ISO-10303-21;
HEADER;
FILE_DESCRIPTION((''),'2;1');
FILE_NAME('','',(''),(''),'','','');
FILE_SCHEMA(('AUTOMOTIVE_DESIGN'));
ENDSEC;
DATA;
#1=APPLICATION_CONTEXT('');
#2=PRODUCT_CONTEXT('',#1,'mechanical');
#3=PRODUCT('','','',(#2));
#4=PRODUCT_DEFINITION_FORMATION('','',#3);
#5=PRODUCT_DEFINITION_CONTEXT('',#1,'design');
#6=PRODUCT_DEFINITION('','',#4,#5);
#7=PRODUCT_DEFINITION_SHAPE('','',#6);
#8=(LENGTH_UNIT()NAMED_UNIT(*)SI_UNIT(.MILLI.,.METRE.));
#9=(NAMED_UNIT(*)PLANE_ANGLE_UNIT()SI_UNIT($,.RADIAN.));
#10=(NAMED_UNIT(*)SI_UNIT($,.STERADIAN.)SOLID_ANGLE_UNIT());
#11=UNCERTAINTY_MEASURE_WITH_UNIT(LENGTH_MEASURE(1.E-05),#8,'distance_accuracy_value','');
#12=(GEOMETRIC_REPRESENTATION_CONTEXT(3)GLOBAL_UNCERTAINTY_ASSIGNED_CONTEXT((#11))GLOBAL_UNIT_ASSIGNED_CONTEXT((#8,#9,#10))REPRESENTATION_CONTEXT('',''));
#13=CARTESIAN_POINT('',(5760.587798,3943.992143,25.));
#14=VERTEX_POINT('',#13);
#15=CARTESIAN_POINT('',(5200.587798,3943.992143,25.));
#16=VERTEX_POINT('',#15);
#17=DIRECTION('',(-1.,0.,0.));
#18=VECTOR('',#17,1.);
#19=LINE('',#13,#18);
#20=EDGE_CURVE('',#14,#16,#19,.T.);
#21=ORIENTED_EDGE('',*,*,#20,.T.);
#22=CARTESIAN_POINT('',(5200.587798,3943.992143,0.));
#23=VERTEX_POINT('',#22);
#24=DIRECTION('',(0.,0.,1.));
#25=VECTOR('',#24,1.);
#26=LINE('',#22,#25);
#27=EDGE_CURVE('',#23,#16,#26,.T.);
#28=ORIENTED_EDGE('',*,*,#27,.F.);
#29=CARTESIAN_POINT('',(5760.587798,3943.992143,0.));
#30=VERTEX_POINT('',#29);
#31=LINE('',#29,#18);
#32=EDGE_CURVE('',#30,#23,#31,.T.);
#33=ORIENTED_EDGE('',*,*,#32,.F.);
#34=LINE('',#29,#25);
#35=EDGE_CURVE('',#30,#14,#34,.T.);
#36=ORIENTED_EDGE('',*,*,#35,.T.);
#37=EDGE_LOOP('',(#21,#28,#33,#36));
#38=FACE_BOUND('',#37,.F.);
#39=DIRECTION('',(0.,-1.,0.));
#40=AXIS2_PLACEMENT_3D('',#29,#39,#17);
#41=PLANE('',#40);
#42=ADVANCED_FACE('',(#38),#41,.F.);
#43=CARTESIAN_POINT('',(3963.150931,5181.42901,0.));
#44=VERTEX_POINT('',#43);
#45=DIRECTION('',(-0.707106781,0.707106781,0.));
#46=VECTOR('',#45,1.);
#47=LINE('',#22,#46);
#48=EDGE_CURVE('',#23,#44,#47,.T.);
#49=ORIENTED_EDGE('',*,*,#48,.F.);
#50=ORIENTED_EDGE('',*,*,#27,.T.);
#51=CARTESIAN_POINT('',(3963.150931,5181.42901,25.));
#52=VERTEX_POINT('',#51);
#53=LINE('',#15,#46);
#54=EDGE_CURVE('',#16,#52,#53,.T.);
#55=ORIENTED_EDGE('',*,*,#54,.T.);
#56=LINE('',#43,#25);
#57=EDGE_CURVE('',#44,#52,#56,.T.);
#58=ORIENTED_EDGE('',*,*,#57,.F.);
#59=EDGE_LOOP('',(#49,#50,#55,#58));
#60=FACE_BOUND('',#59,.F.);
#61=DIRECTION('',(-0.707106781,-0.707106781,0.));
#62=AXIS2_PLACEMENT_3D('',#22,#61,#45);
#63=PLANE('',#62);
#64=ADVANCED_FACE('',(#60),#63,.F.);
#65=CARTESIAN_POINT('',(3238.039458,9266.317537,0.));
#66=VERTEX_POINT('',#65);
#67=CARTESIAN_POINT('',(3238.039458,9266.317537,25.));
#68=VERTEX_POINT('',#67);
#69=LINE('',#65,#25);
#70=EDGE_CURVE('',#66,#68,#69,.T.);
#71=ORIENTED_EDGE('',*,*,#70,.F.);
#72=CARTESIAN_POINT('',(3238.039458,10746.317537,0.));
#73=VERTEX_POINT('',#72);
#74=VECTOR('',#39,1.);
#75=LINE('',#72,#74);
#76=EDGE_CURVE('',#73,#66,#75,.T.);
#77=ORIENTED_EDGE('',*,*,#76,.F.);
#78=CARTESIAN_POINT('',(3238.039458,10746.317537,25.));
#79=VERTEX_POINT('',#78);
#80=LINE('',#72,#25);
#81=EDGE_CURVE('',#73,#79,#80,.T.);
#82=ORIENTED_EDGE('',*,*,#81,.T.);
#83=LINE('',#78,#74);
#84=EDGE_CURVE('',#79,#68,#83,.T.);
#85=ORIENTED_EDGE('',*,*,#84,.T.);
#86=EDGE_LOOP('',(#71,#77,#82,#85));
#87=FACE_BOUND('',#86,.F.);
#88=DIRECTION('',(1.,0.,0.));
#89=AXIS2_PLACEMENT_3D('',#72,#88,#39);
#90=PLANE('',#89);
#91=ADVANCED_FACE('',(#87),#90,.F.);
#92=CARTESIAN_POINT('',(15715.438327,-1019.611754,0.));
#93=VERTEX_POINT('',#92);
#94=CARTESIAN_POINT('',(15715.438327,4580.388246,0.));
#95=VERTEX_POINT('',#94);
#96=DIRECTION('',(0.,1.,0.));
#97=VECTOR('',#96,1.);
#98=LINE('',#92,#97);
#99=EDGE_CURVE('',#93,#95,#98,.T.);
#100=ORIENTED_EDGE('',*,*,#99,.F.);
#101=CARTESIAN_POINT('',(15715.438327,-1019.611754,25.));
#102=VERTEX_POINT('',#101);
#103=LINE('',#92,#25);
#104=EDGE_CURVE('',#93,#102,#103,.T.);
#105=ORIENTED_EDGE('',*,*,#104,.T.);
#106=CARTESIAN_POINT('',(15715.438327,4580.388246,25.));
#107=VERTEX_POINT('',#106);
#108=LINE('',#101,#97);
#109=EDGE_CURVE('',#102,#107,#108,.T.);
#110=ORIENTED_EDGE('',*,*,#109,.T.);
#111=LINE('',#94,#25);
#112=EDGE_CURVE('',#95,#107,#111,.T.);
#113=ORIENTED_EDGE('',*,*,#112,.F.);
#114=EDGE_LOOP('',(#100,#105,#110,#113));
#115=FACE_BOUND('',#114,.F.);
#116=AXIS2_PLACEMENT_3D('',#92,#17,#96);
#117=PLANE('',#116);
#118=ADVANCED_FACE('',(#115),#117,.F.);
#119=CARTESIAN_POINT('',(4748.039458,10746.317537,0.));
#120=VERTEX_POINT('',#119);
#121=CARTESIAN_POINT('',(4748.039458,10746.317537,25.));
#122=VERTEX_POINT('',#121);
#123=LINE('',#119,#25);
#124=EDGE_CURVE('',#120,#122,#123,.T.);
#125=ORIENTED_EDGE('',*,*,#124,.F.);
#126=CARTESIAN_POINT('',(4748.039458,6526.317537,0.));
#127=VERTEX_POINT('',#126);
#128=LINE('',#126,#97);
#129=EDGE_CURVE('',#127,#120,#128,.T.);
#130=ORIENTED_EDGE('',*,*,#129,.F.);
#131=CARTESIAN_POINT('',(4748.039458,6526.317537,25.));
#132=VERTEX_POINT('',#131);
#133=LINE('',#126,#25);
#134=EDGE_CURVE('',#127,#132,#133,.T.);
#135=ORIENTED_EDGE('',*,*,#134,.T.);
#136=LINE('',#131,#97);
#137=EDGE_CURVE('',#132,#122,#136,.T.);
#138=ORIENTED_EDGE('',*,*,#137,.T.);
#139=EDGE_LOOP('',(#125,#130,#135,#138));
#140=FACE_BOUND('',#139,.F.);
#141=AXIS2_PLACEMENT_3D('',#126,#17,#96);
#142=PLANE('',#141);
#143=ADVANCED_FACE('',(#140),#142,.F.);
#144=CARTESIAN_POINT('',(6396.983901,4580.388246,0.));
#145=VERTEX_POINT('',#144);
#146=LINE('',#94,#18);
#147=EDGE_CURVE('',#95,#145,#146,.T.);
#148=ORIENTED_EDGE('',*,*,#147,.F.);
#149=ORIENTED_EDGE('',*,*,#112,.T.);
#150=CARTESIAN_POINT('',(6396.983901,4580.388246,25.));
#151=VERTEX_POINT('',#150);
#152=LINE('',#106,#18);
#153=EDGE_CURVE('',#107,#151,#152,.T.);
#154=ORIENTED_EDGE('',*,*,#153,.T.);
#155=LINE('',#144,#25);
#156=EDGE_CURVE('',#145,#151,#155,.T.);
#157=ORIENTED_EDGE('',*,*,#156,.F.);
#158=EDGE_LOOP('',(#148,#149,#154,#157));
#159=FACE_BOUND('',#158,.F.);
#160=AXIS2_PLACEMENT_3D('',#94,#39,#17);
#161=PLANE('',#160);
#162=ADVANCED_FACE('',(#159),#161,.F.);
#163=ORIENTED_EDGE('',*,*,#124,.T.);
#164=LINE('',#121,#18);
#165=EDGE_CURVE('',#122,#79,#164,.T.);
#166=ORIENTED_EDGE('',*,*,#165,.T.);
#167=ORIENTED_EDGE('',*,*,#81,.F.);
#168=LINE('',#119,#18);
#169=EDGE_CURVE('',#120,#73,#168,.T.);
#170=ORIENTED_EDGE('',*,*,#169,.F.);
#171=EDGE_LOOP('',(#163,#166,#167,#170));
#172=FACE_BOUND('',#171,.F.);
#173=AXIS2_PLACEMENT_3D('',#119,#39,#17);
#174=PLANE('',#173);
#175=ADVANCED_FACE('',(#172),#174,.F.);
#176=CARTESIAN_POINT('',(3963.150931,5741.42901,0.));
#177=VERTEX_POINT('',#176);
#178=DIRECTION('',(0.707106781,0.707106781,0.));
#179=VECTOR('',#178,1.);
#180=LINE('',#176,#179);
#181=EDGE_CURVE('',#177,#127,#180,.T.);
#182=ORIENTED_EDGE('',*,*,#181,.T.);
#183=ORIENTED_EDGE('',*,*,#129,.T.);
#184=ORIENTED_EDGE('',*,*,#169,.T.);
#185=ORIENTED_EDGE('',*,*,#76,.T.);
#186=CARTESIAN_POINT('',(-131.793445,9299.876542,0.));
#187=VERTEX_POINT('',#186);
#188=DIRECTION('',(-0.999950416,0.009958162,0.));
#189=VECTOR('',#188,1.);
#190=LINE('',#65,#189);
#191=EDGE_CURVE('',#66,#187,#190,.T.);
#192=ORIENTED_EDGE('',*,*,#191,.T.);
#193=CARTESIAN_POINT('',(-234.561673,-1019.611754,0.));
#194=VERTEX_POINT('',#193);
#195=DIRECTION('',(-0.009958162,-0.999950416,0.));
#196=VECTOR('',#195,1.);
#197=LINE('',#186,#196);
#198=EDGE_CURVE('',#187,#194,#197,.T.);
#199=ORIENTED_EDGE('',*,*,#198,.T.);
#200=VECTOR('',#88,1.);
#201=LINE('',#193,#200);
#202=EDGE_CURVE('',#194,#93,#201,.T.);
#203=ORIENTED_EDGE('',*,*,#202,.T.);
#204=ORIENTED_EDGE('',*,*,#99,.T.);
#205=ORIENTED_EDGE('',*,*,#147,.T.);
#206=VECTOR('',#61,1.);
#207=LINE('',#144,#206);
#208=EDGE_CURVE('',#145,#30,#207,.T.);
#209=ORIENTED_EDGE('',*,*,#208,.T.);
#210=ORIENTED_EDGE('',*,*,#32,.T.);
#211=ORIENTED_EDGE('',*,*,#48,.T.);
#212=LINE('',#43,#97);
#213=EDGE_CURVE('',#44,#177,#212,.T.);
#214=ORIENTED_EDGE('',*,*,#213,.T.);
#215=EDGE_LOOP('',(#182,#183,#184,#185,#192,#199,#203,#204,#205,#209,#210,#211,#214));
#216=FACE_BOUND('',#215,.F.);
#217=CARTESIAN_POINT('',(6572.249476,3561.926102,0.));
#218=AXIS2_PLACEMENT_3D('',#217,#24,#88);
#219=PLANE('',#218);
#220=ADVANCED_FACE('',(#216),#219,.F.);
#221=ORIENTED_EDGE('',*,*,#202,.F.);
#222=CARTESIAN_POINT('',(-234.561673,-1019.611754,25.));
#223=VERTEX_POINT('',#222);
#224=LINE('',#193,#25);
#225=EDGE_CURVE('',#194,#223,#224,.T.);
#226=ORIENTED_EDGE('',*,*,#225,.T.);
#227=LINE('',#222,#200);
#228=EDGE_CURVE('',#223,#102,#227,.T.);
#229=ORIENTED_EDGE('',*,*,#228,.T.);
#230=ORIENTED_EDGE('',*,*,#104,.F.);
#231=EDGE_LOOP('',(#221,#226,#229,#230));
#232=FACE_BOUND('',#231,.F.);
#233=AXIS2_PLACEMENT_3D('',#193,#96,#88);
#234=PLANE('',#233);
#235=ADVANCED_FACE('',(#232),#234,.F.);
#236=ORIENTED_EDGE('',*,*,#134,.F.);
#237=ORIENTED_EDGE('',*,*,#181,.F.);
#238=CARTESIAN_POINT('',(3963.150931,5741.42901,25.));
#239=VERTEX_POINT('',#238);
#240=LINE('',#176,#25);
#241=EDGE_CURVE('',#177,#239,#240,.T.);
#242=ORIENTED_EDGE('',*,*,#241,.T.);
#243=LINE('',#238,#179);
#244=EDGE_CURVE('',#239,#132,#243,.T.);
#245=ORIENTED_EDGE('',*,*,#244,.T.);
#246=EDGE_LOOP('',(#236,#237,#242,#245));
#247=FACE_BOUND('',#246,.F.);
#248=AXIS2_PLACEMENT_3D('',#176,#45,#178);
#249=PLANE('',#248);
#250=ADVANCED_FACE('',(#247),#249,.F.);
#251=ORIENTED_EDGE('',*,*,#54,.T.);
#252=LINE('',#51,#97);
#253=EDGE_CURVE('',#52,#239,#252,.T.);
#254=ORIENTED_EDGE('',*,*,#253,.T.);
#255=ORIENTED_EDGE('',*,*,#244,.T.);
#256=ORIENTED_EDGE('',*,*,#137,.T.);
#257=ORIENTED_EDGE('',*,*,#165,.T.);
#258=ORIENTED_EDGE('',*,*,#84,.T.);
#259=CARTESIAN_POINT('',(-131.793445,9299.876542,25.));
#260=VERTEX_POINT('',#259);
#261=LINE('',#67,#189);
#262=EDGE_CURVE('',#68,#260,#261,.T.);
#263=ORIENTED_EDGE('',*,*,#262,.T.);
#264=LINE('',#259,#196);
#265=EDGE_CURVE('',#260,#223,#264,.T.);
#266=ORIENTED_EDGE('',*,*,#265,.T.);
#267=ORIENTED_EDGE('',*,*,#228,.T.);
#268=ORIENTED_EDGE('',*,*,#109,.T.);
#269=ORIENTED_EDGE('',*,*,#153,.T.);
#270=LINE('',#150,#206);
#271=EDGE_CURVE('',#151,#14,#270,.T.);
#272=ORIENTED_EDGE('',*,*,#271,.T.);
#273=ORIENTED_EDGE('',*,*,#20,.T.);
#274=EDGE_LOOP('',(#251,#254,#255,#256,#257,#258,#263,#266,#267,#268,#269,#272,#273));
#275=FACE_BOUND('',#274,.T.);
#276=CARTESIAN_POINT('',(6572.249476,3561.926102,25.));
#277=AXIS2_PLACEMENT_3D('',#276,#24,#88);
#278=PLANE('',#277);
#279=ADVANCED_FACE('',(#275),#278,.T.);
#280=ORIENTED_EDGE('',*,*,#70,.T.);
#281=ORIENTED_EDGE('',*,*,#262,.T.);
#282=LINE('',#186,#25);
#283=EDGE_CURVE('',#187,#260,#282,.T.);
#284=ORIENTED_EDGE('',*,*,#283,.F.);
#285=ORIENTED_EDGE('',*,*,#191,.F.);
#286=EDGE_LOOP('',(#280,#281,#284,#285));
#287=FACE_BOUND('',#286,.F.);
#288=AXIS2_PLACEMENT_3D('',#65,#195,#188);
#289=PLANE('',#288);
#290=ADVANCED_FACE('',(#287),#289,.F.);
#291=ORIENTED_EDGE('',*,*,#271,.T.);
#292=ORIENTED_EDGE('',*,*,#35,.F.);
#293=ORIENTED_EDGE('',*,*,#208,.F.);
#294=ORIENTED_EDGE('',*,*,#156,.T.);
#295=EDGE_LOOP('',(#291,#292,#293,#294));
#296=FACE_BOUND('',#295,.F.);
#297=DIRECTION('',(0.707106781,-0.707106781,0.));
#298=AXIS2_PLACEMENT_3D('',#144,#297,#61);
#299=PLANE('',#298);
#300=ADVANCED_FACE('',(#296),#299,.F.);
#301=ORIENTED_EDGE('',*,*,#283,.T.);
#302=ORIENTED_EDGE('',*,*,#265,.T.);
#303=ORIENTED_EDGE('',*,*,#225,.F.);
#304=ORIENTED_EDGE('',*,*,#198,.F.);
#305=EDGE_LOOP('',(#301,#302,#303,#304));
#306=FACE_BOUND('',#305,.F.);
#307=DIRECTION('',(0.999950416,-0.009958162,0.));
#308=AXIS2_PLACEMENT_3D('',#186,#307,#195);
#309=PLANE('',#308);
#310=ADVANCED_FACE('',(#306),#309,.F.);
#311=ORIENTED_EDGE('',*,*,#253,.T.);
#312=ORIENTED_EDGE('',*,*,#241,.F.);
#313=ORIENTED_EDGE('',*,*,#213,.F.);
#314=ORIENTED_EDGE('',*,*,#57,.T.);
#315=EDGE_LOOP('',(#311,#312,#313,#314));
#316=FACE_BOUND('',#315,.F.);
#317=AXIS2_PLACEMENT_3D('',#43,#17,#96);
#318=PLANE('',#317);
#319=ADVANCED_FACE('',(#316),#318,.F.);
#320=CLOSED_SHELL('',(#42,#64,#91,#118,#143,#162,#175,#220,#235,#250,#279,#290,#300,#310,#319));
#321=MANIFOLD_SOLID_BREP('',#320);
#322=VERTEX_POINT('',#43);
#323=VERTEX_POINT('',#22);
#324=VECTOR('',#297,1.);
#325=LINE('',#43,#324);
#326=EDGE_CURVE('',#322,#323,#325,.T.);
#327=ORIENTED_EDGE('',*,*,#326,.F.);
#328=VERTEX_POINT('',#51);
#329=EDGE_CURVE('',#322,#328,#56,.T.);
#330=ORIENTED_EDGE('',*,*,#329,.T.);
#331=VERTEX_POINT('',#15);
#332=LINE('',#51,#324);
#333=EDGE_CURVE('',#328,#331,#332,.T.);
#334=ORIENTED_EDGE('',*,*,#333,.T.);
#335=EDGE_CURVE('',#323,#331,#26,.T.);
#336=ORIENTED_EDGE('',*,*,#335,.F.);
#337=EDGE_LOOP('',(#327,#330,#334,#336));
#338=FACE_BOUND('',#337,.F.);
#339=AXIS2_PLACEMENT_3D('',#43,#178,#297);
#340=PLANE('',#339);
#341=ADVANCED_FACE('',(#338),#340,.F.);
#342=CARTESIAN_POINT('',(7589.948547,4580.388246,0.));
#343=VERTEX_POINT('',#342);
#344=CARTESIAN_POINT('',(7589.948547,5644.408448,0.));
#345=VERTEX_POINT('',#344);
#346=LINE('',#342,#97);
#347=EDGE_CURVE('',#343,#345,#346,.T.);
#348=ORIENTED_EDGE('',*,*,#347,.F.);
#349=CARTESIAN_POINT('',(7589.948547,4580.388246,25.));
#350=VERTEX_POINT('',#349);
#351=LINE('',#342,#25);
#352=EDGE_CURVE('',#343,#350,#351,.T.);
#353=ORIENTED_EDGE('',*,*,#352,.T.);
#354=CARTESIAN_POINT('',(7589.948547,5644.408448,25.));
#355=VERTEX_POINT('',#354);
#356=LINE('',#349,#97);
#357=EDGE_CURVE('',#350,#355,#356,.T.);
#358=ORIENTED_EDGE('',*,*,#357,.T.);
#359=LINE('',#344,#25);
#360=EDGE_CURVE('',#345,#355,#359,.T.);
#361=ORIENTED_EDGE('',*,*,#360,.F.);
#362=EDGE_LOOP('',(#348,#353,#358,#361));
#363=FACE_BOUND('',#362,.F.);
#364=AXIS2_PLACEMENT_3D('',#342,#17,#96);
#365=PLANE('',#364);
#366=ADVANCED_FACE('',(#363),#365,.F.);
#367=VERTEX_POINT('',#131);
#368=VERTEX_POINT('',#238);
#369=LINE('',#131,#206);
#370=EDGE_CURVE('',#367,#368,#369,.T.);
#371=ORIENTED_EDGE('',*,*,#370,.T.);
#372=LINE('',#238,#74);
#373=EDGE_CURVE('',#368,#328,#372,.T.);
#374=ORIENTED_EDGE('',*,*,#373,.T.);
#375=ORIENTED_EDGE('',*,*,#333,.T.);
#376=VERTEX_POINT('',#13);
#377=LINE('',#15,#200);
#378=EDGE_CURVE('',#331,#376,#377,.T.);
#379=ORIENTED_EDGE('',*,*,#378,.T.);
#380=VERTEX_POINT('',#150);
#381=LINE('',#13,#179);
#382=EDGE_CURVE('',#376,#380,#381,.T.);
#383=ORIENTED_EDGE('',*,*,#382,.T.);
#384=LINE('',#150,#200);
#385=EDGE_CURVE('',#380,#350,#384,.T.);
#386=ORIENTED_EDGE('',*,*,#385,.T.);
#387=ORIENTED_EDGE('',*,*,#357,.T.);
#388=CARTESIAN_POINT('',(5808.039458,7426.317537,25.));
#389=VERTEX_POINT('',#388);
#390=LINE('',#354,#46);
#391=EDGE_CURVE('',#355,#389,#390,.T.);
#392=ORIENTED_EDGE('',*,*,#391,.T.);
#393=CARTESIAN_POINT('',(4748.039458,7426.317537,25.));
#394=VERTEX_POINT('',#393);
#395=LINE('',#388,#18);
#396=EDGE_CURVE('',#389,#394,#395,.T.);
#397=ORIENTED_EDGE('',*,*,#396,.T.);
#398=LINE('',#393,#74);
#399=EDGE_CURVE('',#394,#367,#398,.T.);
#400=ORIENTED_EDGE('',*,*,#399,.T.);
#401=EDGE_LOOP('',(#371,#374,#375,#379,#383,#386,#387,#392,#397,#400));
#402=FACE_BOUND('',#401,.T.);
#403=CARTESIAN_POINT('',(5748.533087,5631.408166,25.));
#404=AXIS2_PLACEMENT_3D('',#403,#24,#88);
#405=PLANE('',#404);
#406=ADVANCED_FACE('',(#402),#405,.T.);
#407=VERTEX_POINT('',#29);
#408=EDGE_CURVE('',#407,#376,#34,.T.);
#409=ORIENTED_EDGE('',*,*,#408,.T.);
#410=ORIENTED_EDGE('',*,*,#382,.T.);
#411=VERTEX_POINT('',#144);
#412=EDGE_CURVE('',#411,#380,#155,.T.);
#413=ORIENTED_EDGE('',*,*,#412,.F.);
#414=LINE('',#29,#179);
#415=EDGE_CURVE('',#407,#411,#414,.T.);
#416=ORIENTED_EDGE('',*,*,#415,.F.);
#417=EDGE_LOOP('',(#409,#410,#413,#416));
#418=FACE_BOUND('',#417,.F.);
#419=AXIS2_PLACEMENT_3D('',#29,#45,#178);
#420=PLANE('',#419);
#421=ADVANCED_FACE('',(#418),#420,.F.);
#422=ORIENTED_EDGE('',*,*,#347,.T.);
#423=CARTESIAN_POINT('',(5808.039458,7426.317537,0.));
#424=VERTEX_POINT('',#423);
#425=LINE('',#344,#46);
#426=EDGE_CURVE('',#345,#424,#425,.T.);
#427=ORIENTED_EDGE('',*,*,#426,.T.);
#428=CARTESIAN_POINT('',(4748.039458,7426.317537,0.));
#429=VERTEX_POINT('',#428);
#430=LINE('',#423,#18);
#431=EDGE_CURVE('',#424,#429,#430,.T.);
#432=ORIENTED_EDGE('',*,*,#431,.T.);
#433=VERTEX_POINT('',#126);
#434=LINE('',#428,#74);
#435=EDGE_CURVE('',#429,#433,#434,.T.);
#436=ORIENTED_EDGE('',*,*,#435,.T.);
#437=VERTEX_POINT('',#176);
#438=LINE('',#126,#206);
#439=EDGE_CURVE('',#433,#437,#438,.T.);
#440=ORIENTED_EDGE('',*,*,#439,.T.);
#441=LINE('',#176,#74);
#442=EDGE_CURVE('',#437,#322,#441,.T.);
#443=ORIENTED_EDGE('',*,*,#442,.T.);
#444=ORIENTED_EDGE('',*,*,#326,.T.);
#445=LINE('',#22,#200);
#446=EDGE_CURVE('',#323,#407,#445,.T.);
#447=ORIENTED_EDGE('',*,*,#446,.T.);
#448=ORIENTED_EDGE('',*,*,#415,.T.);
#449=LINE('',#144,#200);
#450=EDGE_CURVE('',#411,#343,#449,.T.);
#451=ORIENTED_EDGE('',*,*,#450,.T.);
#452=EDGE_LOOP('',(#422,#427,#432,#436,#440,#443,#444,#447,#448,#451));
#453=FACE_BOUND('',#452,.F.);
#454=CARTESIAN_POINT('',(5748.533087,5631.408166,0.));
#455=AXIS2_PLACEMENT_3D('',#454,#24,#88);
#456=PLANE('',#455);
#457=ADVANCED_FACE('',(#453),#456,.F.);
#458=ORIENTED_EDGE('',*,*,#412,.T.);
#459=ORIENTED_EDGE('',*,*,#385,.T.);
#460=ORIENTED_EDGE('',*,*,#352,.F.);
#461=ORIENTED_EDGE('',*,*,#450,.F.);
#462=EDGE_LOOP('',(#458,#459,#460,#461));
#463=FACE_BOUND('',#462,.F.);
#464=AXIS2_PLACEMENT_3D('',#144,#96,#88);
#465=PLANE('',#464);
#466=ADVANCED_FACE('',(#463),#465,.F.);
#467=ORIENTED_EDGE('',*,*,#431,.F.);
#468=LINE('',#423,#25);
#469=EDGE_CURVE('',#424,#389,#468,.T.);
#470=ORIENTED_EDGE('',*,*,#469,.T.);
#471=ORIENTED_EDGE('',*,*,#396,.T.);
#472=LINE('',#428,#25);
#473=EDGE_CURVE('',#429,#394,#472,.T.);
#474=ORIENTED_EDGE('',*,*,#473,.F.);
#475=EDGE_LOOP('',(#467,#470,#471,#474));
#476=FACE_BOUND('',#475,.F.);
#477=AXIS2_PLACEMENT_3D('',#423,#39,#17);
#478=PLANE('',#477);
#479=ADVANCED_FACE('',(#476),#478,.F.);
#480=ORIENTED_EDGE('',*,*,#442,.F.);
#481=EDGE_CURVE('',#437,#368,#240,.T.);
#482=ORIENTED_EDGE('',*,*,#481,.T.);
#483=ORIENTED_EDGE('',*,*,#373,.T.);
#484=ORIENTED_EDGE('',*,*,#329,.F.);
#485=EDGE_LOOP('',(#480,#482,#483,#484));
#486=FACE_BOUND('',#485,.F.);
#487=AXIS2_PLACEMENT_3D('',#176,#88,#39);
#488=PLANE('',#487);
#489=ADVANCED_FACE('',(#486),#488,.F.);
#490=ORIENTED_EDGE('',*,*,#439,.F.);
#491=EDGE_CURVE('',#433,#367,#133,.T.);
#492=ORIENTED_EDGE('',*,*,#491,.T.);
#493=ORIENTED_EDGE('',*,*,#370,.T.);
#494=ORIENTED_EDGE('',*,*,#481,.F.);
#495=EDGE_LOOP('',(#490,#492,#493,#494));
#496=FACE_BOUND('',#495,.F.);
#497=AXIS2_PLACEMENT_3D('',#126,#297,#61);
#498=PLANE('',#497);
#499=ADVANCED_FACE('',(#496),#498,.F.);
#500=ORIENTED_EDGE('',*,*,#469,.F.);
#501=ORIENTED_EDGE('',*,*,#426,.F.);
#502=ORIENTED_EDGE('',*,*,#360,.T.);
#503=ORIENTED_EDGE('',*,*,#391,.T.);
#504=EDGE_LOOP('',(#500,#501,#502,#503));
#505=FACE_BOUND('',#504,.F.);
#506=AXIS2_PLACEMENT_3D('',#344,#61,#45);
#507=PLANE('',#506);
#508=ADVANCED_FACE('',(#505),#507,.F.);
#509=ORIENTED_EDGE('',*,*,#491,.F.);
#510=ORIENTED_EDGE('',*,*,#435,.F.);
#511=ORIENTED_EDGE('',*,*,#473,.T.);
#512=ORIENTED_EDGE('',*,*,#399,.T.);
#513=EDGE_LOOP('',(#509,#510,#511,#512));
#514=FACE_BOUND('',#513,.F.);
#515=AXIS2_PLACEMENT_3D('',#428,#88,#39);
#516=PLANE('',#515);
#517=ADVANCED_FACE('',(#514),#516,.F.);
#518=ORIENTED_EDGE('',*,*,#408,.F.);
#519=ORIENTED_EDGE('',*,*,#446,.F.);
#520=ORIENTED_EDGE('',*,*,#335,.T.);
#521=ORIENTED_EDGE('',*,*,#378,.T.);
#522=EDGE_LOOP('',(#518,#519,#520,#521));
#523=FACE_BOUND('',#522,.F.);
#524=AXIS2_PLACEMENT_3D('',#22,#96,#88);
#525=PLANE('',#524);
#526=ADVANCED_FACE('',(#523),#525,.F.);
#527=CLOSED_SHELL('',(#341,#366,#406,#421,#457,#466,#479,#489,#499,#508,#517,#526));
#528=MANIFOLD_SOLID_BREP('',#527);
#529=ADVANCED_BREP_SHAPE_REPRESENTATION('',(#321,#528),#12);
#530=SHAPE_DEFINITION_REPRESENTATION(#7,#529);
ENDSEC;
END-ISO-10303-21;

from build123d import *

# Parameters (mm, degrees)
F1_DEPTH = 25
F2_DEPTH = 25


# Not quite as in the source:
# - the program builds the solid bodies; features that only make, move or delete a surface that nothing else refers to are left out


with BuildPart() as f1:
    # F3 (on Top) → F1 (new body)
    with BuildSketch(Plane.XY):
        Polygon((-131.7934449173, 9299.8765415886), (-234.5616734816, -1019.6117544074), (15715.4383265184, -1019.6117544074), (15715.4383265184, 4580.3882455926), (7589.948546532, 4580.3882455926), (6396.9839009692, 4580.3882455926), (5760.5877979013, 3943.9921425247), (5200.5877979013, 3943.9921425247), (3963.1509308248, 5181.4290096012), (3963.1509308248, 5741.4290096012), (4748.0394579419, 6526.3175367182), (4748.0394579419, 7426.3175367182), (4748.0394579419, 10746.3175367182), (3238.0394579419, 10746.3175367182), (3238.0394579419, 9266.3175367182), align=None)
    extrude(amount=F1_DEPTH)


with BuildPart() as f2:
    # F3 (on Top) → F2 (new body)
    with BuildSketch(Plane.XY):
        Polygon((6396.9839009692, 4580.3882455926), (7589.948546532, 4580.3882455926), (7589.948546532, 5644.4084481281), (5808.0394579419, 7426.3175367182), (4748.0394579419, 7426.3175367182), (4748.0394579419, 6526.3175367182), (3963.1509308248, 5741.4290096012), (3963.1509308248, 5181.4290096012), (5200.5877979013, 3943.9921425247), (5760.5877979013, 3943.9921425247), align=None)
    extrude(amount=F2_DEPTH)


solid = Compound([f1.part, f2.part])
